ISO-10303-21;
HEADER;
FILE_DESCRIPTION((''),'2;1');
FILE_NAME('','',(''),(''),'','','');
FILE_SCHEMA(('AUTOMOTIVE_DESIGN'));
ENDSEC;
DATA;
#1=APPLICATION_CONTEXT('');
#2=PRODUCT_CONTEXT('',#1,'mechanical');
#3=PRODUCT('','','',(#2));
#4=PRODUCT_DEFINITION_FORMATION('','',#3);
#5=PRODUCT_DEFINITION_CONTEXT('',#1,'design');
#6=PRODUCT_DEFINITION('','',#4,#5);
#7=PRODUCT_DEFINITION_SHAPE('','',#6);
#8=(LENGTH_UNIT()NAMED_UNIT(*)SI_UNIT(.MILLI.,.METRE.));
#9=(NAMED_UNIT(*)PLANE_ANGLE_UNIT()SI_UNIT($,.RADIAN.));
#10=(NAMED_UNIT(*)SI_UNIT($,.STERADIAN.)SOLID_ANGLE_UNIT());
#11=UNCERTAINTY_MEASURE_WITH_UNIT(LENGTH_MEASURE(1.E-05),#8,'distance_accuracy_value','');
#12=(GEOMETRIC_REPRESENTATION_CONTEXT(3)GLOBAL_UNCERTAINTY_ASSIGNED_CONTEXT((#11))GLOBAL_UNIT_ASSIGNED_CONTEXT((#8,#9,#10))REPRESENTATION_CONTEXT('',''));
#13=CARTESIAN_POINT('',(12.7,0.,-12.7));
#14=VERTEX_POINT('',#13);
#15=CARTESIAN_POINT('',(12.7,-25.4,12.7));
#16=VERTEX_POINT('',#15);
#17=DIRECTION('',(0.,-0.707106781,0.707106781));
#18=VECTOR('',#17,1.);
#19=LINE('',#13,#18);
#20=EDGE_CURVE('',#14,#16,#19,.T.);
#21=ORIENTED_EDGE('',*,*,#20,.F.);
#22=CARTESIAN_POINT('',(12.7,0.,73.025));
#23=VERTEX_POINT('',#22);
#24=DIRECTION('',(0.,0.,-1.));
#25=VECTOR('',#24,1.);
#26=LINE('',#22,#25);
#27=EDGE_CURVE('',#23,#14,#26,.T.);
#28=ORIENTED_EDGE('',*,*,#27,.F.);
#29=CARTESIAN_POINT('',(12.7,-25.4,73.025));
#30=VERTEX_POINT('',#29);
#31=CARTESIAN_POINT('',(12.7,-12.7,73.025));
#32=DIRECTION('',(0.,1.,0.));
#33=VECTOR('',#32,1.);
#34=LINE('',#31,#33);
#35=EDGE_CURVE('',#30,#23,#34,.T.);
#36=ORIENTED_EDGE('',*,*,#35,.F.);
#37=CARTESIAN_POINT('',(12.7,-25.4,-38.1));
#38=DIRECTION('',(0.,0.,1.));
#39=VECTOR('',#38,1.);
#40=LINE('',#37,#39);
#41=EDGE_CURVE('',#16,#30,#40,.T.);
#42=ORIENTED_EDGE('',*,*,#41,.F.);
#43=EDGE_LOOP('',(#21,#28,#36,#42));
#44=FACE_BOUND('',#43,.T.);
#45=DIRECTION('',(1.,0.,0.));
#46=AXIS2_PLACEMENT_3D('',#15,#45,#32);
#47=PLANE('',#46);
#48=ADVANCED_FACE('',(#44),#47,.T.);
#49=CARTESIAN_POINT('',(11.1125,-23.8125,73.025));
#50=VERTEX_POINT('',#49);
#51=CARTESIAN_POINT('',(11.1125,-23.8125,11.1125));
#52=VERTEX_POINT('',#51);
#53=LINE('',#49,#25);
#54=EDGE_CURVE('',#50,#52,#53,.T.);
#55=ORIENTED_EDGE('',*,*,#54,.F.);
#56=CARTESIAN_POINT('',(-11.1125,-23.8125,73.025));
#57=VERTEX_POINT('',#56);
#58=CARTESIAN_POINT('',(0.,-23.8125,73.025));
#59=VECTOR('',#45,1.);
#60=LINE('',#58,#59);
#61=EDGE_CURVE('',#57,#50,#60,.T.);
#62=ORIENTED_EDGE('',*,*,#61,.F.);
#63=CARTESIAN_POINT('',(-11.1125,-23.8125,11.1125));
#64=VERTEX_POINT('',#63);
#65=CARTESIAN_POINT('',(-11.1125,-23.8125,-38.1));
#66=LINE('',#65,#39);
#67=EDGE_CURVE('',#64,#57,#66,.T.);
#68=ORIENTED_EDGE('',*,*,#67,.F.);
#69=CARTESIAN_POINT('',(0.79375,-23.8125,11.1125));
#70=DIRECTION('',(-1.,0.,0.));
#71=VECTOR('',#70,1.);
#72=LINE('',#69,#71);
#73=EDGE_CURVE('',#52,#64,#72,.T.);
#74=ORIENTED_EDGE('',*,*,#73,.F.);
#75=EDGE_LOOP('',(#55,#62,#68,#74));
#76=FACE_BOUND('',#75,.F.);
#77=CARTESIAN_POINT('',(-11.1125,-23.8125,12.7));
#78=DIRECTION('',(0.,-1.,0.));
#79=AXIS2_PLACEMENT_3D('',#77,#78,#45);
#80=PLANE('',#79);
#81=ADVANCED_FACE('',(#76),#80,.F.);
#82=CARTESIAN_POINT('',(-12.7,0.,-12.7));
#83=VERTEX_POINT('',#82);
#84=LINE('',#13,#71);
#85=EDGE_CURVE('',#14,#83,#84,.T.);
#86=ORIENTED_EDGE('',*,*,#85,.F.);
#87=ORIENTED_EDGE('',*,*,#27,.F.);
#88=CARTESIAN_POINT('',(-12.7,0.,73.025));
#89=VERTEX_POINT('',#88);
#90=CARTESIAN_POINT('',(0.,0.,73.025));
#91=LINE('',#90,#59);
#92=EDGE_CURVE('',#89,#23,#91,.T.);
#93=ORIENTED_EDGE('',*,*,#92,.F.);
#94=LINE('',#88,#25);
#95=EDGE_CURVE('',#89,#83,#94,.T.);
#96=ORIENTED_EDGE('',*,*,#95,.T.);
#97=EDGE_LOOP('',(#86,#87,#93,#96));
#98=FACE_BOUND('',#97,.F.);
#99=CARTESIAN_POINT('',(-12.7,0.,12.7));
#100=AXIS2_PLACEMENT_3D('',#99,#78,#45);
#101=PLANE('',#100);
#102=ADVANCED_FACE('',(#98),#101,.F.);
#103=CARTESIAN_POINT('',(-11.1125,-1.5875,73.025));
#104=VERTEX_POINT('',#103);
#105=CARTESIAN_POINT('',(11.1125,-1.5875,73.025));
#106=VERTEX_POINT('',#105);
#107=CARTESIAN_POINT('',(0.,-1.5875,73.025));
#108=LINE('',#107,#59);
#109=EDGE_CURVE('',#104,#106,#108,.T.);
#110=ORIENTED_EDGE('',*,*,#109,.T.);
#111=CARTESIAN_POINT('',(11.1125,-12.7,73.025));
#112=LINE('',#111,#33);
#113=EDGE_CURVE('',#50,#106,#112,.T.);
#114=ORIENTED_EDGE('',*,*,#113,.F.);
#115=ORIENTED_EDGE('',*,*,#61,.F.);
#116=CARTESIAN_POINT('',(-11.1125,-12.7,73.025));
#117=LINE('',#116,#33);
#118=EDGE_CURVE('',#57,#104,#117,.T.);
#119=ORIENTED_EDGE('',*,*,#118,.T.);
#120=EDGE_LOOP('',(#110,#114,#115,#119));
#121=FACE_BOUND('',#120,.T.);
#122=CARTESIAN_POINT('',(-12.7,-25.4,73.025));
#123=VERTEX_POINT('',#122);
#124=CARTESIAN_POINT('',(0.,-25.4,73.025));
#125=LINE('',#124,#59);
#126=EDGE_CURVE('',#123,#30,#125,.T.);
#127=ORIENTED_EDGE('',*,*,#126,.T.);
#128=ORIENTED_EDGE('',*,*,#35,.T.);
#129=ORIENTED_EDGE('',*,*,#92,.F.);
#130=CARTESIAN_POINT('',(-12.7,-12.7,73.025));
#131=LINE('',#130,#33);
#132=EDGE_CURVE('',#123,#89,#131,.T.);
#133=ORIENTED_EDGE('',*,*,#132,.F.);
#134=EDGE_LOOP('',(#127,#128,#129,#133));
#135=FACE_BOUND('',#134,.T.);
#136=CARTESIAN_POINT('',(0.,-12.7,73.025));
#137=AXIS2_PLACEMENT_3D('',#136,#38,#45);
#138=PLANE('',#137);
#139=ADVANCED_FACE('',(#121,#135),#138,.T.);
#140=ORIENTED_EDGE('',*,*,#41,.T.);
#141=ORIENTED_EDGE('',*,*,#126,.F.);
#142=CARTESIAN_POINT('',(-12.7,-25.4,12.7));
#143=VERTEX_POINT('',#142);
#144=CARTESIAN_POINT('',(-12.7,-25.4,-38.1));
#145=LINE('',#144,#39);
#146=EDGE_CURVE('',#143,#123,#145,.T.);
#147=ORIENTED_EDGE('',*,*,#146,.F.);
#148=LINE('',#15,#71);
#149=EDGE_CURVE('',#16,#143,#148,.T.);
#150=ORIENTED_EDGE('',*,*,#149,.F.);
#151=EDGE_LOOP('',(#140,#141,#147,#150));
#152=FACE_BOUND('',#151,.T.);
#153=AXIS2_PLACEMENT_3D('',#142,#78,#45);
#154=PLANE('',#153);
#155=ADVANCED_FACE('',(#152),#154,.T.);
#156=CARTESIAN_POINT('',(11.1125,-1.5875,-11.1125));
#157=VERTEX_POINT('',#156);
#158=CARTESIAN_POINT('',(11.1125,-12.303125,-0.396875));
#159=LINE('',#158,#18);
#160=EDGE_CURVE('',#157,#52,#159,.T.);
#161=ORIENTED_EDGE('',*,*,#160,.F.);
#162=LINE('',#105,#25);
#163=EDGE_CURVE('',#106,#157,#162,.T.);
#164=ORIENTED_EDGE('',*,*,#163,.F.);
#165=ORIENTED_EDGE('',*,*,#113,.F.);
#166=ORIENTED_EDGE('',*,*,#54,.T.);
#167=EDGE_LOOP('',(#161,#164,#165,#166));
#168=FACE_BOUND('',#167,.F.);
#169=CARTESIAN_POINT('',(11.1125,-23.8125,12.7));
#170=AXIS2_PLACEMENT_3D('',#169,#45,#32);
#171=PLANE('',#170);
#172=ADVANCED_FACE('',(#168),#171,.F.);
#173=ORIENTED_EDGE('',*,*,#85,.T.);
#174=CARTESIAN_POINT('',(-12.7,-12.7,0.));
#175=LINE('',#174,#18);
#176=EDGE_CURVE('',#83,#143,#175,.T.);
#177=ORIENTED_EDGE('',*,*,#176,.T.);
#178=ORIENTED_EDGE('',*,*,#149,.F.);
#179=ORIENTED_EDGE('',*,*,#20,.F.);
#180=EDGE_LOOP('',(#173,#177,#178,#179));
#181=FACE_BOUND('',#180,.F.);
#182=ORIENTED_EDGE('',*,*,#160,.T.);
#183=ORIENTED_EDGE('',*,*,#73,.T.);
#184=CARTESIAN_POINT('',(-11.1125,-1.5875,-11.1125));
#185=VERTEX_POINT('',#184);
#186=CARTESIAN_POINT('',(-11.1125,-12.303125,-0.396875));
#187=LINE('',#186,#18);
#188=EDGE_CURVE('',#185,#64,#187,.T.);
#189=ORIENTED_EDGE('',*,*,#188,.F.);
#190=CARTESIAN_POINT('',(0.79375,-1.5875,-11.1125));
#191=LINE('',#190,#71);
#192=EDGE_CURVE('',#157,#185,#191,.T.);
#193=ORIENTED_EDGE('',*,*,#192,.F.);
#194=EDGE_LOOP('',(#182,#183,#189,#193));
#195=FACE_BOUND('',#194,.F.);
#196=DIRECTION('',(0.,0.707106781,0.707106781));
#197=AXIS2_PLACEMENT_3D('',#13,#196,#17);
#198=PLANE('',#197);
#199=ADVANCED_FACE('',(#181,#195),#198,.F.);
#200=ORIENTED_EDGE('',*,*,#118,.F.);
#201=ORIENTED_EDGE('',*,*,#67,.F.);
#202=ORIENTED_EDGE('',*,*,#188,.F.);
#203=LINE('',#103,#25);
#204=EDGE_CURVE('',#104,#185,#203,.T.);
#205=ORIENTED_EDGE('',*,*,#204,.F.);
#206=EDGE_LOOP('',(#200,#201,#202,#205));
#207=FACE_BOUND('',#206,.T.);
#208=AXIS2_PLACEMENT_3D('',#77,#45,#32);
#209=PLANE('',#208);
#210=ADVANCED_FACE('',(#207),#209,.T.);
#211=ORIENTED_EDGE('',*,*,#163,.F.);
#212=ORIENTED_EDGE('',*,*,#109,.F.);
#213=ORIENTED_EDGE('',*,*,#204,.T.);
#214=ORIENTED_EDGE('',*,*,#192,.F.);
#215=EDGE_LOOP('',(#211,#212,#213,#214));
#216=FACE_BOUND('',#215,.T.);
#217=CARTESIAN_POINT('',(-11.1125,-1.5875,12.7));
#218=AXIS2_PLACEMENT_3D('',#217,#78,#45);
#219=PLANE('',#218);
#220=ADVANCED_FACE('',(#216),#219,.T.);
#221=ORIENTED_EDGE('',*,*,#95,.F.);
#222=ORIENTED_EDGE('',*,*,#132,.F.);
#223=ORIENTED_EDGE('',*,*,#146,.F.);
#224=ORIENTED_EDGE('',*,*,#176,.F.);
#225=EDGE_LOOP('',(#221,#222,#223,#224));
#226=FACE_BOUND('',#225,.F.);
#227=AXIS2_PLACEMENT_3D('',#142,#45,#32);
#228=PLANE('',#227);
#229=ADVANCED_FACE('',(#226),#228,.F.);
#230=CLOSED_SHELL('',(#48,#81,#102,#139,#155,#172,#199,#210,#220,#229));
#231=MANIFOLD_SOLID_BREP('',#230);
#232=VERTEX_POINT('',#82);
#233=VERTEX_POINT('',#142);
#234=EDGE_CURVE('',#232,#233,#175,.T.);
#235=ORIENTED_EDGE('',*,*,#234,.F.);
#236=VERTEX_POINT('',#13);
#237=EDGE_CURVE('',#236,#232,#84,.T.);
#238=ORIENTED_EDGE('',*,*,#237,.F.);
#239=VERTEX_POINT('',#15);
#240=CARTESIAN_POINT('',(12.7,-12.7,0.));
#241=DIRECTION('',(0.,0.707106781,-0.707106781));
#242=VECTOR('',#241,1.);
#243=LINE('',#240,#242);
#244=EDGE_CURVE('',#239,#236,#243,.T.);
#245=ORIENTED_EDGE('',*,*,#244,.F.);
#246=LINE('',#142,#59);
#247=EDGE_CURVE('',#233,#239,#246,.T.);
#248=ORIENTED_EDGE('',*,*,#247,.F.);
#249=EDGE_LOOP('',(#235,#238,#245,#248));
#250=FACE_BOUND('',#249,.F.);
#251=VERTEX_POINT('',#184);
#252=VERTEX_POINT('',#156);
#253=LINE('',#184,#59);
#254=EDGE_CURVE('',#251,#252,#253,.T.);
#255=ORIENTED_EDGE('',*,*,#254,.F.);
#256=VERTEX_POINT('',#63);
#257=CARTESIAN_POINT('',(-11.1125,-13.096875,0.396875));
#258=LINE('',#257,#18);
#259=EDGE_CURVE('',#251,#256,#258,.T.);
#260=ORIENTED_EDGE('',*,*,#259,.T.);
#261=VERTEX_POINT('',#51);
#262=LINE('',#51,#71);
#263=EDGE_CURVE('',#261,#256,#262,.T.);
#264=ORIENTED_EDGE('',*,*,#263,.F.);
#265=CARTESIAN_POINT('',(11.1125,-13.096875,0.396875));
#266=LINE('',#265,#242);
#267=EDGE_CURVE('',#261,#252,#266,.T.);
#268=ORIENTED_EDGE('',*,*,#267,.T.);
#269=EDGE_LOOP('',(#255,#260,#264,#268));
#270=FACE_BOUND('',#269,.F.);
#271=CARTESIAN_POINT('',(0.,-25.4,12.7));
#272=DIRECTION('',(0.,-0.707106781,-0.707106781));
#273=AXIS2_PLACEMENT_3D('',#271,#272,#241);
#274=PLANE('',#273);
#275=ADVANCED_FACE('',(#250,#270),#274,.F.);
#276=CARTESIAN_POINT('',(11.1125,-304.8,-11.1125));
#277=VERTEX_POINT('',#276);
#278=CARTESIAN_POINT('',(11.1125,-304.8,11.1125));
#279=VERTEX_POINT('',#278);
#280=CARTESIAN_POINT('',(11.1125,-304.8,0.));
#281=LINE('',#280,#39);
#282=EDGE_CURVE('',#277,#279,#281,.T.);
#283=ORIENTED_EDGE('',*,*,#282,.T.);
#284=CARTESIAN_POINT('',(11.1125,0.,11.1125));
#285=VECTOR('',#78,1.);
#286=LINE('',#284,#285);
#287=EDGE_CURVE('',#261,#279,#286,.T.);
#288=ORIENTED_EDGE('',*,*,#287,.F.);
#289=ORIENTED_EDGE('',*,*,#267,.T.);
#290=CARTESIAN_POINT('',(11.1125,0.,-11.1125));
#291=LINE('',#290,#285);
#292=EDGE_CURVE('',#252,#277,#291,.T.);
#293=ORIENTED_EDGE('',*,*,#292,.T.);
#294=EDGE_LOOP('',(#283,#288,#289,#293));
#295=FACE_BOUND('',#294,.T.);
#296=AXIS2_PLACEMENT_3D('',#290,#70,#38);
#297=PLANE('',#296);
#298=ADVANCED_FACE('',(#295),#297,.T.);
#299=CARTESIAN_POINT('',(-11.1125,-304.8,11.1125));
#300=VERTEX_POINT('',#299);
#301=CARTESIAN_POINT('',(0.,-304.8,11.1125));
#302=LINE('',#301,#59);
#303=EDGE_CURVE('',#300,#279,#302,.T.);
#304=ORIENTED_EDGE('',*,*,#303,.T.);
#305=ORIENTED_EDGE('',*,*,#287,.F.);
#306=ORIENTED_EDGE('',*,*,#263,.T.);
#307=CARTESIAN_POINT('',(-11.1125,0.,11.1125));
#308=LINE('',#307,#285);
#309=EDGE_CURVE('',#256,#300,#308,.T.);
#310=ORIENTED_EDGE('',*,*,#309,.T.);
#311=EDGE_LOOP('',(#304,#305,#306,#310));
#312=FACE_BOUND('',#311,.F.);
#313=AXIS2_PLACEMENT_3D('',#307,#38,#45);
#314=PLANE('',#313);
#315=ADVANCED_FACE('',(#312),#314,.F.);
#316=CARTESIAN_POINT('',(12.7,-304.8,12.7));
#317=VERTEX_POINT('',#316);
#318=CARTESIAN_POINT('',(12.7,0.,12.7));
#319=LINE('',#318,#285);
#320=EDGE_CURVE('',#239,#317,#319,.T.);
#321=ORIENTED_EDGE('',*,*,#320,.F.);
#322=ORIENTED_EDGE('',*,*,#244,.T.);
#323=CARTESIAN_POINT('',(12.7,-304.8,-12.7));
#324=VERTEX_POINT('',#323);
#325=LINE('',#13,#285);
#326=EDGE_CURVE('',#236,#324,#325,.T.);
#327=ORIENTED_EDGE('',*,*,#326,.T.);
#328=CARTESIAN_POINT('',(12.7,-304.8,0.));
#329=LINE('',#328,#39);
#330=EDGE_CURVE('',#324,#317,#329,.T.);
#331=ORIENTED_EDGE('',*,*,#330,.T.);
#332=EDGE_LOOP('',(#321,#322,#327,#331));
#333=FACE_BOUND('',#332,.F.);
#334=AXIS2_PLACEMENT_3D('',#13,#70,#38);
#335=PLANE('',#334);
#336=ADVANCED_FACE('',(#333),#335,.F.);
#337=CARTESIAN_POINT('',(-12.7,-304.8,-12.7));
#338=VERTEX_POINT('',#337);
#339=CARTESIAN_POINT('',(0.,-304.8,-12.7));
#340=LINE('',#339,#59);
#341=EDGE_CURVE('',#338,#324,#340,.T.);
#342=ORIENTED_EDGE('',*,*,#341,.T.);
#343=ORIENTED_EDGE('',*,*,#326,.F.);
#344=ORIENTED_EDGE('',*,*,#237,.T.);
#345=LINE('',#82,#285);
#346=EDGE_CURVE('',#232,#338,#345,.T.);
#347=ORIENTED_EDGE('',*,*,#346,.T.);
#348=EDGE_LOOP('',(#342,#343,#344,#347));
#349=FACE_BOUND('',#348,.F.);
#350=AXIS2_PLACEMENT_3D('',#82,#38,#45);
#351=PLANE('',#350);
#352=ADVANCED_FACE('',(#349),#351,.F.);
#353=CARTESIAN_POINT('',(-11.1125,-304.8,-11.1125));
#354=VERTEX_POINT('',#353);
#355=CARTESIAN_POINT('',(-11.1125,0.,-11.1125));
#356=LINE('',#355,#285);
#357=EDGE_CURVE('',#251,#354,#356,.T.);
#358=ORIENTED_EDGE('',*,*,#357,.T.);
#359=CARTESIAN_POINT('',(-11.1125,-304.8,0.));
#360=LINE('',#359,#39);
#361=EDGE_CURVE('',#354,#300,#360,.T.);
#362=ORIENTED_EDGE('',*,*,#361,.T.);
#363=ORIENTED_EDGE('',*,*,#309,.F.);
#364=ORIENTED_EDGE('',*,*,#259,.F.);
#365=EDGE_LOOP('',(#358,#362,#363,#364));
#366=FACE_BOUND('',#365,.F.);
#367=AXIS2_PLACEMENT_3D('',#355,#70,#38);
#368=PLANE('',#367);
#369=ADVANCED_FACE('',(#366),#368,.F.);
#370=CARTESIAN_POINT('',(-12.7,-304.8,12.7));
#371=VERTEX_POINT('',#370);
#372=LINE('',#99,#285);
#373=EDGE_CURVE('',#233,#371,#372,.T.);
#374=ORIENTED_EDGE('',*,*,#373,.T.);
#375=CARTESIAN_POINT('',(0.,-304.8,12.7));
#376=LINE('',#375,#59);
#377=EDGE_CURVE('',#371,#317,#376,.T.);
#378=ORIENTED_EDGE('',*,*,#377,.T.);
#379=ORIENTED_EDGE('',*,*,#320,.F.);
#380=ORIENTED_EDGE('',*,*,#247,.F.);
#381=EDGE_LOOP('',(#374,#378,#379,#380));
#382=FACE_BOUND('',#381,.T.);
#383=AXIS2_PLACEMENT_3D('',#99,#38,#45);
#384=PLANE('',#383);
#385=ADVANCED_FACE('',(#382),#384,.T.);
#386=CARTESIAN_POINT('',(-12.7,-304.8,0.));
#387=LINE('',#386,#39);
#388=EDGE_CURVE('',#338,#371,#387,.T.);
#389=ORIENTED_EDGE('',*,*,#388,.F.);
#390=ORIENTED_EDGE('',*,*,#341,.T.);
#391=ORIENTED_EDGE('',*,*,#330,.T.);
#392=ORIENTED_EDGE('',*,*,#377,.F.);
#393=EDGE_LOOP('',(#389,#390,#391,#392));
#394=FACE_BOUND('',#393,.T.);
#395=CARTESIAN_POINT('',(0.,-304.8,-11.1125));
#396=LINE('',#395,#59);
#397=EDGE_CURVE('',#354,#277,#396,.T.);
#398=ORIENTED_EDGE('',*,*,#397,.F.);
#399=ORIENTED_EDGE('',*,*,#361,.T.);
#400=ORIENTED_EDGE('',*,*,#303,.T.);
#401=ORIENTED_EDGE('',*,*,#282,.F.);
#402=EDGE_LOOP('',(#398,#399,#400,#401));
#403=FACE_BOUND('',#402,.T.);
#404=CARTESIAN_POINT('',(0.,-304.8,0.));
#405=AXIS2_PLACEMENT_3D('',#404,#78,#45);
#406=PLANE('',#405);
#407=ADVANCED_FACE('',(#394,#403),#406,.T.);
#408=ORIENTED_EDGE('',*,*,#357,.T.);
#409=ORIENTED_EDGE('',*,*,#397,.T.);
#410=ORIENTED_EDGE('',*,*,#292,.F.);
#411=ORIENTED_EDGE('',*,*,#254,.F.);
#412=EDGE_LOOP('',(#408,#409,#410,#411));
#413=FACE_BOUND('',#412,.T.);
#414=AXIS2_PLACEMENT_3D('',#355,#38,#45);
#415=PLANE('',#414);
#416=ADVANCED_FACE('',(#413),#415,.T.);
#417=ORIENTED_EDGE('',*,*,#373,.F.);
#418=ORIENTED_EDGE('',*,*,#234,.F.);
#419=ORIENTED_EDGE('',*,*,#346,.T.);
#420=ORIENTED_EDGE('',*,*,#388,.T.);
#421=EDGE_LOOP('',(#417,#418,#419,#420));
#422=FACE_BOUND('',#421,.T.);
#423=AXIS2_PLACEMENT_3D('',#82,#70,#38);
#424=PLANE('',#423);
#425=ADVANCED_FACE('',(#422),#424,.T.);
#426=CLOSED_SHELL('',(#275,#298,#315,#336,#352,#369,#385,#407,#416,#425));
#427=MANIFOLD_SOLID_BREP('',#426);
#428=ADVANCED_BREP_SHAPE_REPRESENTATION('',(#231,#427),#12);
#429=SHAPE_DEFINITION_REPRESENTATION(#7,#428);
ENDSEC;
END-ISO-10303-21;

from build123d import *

# Parameters (mm, degrees)
F0_W          = 25.4
F0_H          = 25.4
F0_W_2        = 22.225
F0_H_2        = 22.225
F1_DEPTH      = 304.8
F3_DEPTH      = 12.701
F3_DEPTH_BACK = 12.701
F5_W          = 25.4
F5_H          = 25.4
F5_W_2        = 22.225
F5_H_2        = 22.225
F6_DEPTH      = 60.325
F6_DEPTH_BACK = 50.8
F8_DEPTH      = 25.401


with BuildPart() as f1:
    # F0 (on Front) → F1 (new body)
    with BuildSketch(Plane.XZ):
        Rectangle(F0_W, F0_H)
        Rectangle(F0_W_2, F0_H_2, mode=Mode.SUBTRACT)
    extrude(amount=F1_DEPTH)

    # F2 (on Right) → F3 (cut, two sides)
    with BuildSketch(Plane.YZ) as f3_sk:
        Polygon((0, -12.7), (0, 12.7), (-25.4, 12.7), align=None)
    extrude(amount=-F3_DEPTH, mode=Mode.SUBTRACT)
    extrude(f3_sk.sketch, amount=F3_DEPTH_BACK, mode=Mode.SUBTRACT)


with BuildPart() as f6:
    # F5 (on offset) → F6 (new body, two sides)
    with BuildSketch(Plane.XY.offset(12.7)) as f6_sk:
        with Locations((0, -12.7)):
            Rectangle(F5_W, F5_H)
        with Locations((0, -12.7)):
            Rectangle(F5_W_2, F5_H_2, mode=Mode.SUBTRACT)
    extrude(amount=F6_DEPTH)
    extrude(f6_sk.sketch, amount=-F6_DEPTH_BACK)

    # F7 (on face) → F8 (cut, through all)
    with BuildSketch(Plane.YZ.offset(12.7)):
        Polygon((-25.4, 12.7), (-25.4, -38.1), (0, -38.1), (0, -12.7), align=None)
    extrude(amount=-F8_DEPTH, mode=Mode.SUBTRACT)


solid = Compound([f1.part, f6.part])
